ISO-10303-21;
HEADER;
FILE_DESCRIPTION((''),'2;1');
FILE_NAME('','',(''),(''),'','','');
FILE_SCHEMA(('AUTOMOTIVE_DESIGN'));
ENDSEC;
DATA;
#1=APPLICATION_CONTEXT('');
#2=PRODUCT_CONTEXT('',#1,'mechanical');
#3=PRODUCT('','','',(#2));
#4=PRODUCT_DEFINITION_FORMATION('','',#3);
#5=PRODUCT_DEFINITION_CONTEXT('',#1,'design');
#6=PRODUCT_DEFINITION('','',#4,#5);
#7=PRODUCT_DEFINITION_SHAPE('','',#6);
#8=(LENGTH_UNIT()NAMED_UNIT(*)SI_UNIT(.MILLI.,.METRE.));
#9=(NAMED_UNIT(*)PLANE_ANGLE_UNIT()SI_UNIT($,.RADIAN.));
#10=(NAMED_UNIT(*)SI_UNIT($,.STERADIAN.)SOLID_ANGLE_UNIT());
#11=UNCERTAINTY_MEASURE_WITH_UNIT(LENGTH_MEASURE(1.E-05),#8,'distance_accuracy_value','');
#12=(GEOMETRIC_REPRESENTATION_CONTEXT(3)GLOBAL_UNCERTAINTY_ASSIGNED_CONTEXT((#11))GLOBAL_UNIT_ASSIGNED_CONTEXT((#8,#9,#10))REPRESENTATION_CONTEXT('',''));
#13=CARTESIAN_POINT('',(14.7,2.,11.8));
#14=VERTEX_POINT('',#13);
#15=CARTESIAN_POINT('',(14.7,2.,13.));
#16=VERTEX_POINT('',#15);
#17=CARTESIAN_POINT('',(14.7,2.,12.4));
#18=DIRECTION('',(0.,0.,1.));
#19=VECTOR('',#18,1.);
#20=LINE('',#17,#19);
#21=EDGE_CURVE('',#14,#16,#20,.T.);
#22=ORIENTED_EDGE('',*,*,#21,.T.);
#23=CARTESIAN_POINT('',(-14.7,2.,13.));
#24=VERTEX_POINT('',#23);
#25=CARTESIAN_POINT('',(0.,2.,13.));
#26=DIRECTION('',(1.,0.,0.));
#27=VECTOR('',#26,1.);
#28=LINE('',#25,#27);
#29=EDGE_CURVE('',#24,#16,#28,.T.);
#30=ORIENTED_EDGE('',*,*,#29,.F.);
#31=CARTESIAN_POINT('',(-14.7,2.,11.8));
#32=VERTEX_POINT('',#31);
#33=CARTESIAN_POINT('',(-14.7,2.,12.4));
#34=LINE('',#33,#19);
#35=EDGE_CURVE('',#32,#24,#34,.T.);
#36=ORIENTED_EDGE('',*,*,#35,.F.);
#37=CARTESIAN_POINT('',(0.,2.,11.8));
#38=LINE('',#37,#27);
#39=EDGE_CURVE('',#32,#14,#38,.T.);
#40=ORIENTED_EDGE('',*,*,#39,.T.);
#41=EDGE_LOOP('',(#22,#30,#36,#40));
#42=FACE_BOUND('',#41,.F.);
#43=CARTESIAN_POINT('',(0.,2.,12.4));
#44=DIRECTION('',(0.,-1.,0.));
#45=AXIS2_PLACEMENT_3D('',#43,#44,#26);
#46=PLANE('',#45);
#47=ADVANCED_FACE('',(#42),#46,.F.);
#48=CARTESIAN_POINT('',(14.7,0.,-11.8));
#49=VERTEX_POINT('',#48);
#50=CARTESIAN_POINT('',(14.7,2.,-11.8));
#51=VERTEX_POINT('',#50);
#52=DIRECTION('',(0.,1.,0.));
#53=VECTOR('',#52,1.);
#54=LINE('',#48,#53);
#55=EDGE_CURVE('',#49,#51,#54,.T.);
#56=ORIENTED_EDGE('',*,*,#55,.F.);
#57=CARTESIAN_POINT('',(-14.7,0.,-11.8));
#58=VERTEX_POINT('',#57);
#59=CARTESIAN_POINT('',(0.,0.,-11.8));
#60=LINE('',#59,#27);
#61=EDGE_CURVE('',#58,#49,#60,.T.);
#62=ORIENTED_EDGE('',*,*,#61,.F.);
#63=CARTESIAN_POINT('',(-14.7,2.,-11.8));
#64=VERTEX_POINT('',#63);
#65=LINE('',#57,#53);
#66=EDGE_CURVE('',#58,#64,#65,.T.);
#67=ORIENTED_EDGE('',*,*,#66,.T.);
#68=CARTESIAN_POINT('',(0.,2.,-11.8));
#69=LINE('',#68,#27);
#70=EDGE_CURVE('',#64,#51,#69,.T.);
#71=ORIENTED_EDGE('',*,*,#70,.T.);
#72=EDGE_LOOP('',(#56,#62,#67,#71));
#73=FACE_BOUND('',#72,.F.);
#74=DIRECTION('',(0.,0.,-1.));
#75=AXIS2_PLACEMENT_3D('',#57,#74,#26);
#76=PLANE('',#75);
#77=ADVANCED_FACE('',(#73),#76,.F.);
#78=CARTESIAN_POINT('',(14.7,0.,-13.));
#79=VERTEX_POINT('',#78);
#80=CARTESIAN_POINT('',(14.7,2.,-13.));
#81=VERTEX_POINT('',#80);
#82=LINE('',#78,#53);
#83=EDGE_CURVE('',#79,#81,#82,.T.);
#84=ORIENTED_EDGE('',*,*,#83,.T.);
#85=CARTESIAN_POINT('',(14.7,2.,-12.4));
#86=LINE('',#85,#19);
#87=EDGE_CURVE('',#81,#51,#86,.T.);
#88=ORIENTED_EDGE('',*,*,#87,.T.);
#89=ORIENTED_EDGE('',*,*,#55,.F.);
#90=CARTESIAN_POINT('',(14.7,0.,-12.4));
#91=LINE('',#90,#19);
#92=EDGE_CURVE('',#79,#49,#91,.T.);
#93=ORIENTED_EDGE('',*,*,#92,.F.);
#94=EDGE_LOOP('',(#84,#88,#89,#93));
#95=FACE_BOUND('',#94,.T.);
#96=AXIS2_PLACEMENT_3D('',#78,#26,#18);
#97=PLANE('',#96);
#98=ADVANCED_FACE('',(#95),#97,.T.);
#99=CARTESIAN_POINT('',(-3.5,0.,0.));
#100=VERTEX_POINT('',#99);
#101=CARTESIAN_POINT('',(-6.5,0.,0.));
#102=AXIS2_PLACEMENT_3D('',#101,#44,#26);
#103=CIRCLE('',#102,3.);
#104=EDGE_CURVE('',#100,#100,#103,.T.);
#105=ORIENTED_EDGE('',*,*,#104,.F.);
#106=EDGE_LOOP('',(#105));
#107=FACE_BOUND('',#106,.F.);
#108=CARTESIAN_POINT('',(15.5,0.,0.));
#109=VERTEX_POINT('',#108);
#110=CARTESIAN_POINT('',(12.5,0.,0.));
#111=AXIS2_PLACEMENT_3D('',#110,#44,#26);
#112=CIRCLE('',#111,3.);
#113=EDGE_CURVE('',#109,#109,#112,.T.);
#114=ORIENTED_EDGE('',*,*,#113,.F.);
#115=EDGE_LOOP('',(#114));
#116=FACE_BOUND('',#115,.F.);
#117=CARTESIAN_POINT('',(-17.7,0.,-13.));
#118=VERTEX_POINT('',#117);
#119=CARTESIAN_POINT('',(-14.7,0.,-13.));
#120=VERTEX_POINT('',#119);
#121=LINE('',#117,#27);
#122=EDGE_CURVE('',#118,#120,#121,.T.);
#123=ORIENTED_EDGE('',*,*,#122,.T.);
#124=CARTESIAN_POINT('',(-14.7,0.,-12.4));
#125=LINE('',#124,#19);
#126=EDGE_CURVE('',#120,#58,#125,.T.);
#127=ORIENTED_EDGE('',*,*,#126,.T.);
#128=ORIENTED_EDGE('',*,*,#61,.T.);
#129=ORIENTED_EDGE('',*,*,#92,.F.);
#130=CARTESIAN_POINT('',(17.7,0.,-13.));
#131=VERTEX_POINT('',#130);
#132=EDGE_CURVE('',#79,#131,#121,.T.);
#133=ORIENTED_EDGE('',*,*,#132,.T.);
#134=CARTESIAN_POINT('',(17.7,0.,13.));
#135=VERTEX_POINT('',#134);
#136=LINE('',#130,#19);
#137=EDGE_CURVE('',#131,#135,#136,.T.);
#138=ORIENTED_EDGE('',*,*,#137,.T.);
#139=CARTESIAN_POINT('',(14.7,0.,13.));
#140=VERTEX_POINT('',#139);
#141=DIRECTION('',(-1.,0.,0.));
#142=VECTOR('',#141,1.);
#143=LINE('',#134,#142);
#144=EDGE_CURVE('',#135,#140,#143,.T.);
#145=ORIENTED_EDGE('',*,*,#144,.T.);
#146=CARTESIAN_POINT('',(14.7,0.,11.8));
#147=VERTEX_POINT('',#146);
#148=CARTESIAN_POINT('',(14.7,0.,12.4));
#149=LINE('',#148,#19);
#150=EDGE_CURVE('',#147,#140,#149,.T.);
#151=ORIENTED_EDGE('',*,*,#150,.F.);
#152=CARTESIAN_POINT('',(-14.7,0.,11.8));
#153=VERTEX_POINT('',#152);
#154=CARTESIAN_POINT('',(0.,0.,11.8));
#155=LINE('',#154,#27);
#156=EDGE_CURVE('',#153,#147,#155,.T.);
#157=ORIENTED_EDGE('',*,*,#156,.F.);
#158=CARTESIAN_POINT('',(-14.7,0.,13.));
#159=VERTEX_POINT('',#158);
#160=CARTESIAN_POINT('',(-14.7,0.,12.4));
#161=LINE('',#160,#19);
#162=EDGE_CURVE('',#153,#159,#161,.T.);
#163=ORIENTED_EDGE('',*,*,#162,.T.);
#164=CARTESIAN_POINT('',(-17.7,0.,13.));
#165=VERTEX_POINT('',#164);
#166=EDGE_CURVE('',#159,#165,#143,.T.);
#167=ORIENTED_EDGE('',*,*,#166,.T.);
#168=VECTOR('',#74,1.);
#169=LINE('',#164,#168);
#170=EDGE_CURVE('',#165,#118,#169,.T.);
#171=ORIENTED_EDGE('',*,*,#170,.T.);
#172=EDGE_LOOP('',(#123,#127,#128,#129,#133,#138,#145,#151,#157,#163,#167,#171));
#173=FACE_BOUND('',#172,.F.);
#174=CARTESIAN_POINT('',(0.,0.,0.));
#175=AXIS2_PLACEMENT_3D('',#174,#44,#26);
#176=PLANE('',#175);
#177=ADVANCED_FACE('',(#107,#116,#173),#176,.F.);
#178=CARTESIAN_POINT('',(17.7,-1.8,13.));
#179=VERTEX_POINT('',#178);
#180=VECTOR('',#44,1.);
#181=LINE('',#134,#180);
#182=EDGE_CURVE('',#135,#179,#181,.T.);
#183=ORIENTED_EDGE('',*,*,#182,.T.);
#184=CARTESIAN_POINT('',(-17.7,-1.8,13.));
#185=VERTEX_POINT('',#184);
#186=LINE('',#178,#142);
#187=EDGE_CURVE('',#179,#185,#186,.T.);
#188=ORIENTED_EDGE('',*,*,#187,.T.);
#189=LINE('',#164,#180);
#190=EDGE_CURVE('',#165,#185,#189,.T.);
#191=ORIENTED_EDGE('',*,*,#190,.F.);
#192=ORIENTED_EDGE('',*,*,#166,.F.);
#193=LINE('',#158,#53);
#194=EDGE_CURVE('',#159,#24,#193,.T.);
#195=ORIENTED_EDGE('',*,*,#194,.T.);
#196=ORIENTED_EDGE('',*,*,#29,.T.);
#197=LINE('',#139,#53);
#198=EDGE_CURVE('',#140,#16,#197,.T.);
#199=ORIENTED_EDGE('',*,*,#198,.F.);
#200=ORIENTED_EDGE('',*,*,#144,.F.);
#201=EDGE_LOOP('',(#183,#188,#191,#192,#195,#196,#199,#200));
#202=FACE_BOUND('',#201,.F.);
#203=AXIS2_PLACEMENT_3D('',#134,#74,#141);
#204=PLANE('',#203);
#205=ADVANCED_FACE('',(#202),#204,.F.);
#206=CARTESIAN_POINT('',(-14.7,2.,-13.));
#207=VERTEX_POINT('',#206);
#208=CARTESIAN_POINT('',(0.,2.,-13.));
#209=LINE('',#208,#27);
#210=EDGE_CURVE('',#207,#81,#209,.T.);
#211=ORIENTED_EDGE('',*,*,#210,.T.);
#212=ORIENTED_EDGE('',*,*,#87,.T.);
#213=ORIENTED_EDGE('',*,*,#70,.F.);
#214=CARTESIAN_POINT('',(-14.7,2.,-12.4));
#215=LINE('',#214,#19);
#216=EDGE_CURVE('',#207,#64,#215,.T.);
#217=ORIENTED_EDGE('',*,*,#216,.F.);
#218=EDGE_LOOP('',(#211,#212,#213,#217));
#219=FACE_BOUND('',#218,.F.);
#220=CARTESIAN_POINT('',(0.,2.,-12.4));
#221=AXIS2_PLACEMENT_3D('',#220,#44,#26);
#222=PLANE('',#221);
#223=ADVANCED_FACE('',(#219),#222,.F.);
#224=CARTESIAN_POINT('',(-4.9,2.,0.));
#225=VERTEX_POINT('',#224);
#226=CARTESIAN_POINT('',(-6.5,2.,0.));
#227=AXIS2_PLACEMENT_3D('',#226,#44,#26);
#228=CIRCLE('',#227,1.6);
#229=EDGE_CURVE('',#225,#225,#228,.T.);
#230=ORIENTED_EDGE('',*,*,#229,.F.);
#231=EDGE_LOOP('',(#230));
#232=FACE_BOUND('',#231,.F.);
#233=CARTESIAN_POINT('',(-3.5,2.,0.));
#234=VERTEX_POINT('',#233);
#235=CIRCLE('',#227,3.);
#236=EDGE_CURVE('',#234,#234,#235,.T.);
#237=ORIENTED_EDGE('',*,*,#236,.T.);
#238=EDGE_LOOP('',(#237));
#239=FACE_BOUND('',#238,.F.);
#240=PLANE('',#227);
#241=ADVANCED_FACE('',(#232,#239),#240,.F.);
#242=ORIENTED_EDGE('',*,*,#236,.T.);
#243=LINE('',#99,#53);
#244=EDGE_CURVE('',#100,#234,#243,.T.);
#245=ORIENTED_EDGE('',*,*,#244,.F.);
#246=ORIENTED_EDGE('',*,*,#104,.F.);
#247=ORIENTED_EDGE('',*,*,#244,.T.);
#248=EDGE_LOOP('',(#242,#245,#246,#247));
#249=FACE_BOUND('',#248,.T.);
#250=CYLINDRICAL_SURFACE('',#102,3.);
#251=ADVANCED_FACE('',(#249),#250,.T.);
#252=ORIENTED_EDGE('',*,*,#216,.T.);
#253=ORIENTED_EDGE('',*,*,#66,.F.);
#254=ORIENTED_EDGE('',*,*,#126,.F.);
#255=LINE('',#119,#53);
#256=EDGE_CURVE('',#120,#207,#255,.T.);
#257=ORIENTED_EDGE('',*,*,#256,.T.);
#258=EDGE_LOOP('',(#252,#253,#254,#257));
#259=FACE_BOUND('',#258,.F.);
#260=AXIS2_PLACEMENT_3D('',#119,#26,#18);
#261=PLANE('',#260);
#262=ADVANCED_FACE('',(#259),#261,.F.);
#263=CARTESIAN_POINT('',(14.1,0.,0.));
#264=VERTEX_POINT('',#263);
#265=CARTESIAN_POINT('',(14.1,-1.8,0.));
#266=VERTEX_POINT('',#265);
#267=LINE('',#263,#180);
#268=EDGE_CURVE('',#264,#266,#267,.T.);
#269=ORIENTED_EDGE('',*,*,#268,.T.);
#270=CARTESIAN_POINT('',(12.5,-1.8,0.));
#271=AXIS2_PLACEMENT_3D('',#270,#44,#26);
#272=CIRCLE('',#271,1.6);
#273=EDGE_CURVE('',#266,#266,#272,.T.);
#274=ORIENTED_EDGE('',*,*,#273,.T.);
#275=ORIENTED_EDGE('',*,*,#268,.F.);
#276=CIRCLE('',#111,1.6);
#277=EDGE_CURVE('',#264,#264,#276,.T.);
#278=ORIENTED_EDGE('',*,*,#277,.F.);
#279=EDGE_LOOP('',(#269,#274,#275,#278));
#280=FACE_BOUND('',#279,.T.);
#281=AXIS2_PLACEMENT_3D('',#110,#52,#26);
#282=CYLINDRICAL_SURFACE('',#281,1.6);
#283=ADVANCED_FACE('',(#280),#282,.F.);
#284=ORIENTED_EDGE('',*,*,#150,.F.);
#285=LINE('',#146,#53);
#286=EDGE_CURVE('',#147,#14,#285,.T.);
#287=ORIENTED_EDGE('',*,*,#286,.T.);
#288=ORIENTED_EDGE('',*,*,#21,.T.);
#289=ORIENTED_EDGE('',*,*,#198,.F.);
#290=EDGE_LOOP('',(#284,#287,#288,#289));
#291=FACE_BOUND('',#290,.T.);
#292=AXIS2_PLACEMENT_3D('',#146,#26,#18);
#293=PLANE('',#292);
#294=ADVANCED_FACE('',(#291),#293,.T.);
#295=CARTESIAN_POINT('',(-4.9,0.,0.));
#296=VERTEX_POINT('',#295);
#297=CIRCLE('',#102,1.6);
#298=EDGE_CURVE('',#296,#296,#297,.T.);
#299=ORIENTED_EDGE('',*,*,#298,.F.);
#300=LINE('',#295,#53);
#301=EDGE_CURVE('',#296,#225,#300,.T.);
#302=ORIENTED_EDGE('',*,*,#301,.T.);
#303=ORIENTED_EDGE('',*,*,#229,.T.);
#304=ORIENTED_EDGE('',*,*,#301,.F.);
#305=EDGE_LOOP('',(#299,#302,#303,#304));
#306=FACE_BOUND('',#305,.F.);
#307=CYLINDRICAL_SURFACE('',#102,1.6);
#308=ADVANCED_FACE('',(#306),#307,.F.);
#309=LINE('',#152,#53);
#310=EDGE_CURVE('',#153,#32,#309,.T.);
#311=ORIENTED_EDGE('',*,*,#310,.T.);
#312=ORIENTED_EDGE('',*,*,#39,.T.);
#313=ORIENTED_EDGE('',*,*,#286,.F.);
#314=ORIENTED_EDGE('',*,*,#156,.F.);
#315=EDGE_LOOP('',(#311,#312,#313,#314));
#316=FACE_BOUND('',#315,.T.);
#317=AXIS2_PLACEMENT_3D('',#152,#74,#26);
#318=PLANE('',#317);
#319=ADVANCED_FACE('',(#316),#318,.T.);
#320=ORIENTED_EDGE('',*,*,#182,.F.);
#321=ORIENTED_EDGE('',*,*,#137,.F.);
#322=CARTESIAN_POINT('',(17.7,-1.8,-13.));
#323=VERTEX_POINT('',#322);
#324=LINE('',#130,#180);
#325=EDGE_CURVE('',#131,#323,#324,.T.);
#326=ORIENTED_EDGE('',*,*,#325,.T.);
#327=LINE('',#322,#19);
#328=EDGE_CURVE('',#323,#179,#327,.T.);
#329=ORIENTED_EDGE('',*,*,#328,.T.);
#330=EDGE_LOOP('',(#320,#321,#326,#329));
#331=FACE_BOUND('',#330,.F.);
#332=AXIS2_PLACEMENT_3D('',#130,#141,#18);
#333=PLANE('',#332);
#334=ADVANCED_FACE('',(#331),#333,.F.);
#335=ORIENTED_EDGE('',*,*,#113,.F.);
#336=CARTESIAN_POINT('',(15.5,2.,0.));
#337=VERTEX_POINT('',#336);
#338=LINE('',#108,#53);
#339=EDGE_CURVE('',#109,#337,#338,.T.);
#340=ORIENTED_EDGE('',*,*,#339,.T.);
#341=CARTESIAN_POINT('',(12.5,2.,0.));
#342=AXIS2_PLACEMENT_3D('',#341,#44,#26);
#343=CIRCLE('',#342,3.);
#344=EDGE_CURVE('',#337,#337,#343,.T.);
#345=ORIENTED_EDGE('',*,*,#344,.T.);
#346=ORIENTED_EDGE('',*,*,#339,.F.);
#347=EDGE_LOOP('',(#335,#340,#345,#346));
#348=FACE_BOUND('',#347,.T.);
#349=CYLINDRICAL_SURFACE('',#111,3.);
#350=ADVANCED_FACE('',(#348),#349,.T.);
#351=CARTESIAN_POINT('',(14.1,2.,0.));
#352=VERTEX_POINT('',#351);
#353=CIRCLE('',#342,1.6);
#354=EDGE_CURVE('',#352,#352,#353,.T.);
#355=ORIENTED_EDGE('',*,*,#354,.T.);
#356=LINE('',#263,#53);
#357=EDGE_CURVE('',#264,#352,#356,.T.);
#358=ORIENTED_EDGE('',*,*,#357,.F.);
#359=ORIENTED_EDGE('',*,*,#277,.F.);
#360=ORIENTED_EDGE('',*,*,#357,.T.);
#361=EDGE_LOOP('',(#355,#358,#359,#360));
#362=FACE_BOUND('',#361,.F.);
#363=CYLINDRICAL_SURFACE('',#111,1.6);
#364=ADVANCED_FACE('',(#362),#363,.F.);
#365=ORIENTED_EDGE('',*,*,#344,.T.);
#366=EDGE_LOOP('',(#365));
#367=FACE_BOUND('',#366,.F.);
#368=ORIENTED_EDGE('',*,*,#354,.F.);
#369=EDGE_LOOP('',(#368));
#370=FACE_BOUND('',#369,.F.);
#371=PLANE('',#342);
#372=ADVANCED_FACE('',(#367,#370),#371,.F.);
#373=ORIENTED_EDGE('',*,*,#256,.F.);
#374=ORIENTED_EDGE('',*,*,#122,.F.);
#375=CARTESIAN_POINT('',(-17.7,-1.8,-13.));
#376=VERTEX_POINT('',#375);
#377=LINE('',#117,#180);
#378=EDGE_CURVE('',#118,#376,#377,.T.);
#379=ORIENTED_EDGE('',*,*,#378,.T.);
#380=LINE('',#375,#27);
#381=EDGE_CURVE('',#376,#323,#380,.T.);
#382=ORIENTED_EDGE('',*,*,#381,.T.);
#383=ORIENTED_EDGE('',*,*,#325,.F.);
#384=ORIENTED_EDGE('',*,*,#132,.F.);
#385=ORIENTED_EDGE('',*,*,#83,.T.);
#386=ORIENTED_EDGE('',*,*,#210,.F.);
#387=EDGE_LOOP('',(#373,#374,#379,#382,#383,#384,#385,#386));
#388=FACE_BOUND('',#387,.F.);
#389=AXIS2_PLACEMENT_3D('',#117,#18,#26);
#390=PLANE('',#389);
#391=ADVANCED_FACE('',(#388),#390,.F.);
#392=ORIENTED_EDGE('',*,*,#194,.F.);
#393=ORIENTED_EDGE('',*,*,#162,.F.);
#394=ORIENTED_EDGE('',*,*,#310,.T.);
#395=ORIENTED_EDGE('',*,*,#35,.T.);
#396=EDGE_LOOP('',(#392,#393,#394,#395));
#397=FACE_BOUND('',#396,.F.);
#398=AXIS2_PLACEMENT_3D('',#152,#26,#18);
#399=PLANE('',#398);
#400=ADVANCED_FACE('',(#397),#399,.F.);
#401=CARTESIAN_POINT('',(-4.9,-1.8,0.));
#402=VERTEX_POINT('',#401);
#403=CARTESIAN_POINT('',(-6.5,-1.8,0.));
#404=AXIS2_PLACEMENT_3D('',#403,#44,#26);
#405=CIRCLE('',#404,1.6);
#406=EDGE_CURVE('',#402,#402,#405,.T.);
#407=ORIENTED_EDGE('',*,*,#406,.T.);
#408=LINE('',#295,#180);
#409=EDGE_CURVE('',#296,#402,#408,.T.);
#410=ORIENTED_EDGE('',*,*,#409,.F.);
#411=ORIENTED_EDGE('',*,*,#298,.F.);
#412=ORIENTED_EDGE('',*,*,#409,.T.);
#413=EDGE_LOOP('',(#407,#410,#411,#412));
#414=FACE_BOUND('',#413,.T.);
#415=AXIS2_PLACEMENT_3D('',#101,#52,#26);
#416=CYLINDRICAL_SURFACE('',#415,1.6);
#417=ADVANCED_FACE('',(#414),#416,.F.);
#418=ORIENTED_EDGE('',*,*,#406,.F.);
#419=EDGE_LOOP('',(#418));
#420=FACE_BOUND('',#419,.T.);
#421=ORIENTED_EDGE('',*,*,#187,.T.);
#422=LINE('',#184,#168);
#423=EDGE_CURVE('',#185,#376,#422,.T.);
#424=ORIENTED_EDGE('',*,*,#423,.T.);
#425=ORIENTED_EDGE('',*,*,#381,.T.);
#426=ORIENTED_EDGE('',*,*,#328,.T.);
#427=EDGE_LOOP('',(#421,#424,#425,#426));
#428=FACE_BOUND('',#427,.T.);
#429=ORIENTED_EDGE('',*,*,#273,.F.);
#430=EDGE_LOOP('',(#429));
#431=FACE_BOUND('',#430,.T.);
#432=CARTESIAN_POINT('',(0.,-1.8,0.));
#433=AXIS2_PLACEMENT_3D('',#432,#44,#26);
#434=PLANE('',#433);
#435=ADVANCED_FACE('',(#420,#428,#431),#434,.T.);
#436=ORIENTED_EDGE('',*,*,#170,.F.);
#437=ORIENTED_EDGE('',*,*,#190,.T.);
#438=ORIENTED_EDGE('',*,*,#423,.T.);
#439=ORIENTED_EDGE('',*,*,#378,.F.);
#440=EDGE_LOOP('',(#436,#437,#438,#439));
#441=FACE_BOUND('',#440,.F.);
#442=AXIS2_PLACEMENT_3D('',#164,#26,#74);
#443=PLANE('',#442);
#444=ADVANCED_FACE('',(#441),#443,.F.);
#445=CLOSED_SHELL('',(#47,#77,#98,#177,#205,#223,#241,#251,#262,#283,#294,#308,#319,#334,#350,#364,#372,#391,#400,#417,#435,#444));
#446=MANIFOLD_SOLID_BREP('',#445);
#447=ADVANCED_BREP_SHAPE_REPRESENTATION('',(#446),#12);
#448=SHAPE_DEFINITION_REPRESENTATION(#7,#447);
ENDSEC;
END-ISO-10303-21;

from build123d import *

# Parameters (mm, degrees)
F0_R     = 3
F0_W     = 29.4
F0_H     = 1.2
F0_R_2   = 1.6
F1_DEPTH = 1.8
F2_DEPTH = 2


# Not quite as in the source:
# - a feature names something its author has since deleted; it is built from what else it names


with BuildPart() as f1:
    # F0 (on Front) → F1 (new body)
    with BuildSketch(Plane.XZ):
        Polygon((-14.7, 13), (-17.7, 13), (-17.7, -13), (-14.7, -13), (-14.7, -11.8), (14.7, -11.8), (14.7, -13), (17.7, -13), (17.7, 13), (14.7, 13), (14.7, 11.8), (-14.7, 11.8), align=None)
        with Locations((-6.5, 0)):
            Circle(F0_R, mode=Mode.SUBTRACT)
        with Locations((12.5, 0)):
            Circle(F0_R, mode=Mode.SUBTRACT)
        with Locations((0, 12.4)):
            Rectangle(F0_W, F0_H)
        with Locations((0, -12.4)):
            Rectangle(F0_W, F0_H)
        with Locations((-6.5, 0)):
            Circle(F0_R)
        with Locations((-6.5, 0)):
            Circle(F0_R_2, mode=Mode.SUBTRACT)
        with Locations((12.5, 0)):
            Circle(F0_R)
        with Locations((12.5, 0)):
            Circle(F0_R_2, mode=Mode.SUBTRACT)
    extrude(amount=F1_DEPTH)

    # F0 (on Front) → F2 (join)
    with BuildSketch(Plane.XZ):
        with Locations((12.5, 0)):
            Circle(F0_R)
        with Locations((12.5, 0)):
            Circle(F0_R_2, mode=Mode.SUBTRACT)
        with Locations((-6.5, 0)):
            Circle(F0_R)
        with Locations((-6.5, 0)):
            Circle(F0_R_2, mode=Mode.SUBTRACT)
        with Locations((0, 12.4)):
            Rectangle(F0_W, F0_H)
        with Locations((0, -12.4)):
            Rectangle(F0_W, F0_H)
    extrude(amount=-F2_DEPTH)


solid = f1.part
